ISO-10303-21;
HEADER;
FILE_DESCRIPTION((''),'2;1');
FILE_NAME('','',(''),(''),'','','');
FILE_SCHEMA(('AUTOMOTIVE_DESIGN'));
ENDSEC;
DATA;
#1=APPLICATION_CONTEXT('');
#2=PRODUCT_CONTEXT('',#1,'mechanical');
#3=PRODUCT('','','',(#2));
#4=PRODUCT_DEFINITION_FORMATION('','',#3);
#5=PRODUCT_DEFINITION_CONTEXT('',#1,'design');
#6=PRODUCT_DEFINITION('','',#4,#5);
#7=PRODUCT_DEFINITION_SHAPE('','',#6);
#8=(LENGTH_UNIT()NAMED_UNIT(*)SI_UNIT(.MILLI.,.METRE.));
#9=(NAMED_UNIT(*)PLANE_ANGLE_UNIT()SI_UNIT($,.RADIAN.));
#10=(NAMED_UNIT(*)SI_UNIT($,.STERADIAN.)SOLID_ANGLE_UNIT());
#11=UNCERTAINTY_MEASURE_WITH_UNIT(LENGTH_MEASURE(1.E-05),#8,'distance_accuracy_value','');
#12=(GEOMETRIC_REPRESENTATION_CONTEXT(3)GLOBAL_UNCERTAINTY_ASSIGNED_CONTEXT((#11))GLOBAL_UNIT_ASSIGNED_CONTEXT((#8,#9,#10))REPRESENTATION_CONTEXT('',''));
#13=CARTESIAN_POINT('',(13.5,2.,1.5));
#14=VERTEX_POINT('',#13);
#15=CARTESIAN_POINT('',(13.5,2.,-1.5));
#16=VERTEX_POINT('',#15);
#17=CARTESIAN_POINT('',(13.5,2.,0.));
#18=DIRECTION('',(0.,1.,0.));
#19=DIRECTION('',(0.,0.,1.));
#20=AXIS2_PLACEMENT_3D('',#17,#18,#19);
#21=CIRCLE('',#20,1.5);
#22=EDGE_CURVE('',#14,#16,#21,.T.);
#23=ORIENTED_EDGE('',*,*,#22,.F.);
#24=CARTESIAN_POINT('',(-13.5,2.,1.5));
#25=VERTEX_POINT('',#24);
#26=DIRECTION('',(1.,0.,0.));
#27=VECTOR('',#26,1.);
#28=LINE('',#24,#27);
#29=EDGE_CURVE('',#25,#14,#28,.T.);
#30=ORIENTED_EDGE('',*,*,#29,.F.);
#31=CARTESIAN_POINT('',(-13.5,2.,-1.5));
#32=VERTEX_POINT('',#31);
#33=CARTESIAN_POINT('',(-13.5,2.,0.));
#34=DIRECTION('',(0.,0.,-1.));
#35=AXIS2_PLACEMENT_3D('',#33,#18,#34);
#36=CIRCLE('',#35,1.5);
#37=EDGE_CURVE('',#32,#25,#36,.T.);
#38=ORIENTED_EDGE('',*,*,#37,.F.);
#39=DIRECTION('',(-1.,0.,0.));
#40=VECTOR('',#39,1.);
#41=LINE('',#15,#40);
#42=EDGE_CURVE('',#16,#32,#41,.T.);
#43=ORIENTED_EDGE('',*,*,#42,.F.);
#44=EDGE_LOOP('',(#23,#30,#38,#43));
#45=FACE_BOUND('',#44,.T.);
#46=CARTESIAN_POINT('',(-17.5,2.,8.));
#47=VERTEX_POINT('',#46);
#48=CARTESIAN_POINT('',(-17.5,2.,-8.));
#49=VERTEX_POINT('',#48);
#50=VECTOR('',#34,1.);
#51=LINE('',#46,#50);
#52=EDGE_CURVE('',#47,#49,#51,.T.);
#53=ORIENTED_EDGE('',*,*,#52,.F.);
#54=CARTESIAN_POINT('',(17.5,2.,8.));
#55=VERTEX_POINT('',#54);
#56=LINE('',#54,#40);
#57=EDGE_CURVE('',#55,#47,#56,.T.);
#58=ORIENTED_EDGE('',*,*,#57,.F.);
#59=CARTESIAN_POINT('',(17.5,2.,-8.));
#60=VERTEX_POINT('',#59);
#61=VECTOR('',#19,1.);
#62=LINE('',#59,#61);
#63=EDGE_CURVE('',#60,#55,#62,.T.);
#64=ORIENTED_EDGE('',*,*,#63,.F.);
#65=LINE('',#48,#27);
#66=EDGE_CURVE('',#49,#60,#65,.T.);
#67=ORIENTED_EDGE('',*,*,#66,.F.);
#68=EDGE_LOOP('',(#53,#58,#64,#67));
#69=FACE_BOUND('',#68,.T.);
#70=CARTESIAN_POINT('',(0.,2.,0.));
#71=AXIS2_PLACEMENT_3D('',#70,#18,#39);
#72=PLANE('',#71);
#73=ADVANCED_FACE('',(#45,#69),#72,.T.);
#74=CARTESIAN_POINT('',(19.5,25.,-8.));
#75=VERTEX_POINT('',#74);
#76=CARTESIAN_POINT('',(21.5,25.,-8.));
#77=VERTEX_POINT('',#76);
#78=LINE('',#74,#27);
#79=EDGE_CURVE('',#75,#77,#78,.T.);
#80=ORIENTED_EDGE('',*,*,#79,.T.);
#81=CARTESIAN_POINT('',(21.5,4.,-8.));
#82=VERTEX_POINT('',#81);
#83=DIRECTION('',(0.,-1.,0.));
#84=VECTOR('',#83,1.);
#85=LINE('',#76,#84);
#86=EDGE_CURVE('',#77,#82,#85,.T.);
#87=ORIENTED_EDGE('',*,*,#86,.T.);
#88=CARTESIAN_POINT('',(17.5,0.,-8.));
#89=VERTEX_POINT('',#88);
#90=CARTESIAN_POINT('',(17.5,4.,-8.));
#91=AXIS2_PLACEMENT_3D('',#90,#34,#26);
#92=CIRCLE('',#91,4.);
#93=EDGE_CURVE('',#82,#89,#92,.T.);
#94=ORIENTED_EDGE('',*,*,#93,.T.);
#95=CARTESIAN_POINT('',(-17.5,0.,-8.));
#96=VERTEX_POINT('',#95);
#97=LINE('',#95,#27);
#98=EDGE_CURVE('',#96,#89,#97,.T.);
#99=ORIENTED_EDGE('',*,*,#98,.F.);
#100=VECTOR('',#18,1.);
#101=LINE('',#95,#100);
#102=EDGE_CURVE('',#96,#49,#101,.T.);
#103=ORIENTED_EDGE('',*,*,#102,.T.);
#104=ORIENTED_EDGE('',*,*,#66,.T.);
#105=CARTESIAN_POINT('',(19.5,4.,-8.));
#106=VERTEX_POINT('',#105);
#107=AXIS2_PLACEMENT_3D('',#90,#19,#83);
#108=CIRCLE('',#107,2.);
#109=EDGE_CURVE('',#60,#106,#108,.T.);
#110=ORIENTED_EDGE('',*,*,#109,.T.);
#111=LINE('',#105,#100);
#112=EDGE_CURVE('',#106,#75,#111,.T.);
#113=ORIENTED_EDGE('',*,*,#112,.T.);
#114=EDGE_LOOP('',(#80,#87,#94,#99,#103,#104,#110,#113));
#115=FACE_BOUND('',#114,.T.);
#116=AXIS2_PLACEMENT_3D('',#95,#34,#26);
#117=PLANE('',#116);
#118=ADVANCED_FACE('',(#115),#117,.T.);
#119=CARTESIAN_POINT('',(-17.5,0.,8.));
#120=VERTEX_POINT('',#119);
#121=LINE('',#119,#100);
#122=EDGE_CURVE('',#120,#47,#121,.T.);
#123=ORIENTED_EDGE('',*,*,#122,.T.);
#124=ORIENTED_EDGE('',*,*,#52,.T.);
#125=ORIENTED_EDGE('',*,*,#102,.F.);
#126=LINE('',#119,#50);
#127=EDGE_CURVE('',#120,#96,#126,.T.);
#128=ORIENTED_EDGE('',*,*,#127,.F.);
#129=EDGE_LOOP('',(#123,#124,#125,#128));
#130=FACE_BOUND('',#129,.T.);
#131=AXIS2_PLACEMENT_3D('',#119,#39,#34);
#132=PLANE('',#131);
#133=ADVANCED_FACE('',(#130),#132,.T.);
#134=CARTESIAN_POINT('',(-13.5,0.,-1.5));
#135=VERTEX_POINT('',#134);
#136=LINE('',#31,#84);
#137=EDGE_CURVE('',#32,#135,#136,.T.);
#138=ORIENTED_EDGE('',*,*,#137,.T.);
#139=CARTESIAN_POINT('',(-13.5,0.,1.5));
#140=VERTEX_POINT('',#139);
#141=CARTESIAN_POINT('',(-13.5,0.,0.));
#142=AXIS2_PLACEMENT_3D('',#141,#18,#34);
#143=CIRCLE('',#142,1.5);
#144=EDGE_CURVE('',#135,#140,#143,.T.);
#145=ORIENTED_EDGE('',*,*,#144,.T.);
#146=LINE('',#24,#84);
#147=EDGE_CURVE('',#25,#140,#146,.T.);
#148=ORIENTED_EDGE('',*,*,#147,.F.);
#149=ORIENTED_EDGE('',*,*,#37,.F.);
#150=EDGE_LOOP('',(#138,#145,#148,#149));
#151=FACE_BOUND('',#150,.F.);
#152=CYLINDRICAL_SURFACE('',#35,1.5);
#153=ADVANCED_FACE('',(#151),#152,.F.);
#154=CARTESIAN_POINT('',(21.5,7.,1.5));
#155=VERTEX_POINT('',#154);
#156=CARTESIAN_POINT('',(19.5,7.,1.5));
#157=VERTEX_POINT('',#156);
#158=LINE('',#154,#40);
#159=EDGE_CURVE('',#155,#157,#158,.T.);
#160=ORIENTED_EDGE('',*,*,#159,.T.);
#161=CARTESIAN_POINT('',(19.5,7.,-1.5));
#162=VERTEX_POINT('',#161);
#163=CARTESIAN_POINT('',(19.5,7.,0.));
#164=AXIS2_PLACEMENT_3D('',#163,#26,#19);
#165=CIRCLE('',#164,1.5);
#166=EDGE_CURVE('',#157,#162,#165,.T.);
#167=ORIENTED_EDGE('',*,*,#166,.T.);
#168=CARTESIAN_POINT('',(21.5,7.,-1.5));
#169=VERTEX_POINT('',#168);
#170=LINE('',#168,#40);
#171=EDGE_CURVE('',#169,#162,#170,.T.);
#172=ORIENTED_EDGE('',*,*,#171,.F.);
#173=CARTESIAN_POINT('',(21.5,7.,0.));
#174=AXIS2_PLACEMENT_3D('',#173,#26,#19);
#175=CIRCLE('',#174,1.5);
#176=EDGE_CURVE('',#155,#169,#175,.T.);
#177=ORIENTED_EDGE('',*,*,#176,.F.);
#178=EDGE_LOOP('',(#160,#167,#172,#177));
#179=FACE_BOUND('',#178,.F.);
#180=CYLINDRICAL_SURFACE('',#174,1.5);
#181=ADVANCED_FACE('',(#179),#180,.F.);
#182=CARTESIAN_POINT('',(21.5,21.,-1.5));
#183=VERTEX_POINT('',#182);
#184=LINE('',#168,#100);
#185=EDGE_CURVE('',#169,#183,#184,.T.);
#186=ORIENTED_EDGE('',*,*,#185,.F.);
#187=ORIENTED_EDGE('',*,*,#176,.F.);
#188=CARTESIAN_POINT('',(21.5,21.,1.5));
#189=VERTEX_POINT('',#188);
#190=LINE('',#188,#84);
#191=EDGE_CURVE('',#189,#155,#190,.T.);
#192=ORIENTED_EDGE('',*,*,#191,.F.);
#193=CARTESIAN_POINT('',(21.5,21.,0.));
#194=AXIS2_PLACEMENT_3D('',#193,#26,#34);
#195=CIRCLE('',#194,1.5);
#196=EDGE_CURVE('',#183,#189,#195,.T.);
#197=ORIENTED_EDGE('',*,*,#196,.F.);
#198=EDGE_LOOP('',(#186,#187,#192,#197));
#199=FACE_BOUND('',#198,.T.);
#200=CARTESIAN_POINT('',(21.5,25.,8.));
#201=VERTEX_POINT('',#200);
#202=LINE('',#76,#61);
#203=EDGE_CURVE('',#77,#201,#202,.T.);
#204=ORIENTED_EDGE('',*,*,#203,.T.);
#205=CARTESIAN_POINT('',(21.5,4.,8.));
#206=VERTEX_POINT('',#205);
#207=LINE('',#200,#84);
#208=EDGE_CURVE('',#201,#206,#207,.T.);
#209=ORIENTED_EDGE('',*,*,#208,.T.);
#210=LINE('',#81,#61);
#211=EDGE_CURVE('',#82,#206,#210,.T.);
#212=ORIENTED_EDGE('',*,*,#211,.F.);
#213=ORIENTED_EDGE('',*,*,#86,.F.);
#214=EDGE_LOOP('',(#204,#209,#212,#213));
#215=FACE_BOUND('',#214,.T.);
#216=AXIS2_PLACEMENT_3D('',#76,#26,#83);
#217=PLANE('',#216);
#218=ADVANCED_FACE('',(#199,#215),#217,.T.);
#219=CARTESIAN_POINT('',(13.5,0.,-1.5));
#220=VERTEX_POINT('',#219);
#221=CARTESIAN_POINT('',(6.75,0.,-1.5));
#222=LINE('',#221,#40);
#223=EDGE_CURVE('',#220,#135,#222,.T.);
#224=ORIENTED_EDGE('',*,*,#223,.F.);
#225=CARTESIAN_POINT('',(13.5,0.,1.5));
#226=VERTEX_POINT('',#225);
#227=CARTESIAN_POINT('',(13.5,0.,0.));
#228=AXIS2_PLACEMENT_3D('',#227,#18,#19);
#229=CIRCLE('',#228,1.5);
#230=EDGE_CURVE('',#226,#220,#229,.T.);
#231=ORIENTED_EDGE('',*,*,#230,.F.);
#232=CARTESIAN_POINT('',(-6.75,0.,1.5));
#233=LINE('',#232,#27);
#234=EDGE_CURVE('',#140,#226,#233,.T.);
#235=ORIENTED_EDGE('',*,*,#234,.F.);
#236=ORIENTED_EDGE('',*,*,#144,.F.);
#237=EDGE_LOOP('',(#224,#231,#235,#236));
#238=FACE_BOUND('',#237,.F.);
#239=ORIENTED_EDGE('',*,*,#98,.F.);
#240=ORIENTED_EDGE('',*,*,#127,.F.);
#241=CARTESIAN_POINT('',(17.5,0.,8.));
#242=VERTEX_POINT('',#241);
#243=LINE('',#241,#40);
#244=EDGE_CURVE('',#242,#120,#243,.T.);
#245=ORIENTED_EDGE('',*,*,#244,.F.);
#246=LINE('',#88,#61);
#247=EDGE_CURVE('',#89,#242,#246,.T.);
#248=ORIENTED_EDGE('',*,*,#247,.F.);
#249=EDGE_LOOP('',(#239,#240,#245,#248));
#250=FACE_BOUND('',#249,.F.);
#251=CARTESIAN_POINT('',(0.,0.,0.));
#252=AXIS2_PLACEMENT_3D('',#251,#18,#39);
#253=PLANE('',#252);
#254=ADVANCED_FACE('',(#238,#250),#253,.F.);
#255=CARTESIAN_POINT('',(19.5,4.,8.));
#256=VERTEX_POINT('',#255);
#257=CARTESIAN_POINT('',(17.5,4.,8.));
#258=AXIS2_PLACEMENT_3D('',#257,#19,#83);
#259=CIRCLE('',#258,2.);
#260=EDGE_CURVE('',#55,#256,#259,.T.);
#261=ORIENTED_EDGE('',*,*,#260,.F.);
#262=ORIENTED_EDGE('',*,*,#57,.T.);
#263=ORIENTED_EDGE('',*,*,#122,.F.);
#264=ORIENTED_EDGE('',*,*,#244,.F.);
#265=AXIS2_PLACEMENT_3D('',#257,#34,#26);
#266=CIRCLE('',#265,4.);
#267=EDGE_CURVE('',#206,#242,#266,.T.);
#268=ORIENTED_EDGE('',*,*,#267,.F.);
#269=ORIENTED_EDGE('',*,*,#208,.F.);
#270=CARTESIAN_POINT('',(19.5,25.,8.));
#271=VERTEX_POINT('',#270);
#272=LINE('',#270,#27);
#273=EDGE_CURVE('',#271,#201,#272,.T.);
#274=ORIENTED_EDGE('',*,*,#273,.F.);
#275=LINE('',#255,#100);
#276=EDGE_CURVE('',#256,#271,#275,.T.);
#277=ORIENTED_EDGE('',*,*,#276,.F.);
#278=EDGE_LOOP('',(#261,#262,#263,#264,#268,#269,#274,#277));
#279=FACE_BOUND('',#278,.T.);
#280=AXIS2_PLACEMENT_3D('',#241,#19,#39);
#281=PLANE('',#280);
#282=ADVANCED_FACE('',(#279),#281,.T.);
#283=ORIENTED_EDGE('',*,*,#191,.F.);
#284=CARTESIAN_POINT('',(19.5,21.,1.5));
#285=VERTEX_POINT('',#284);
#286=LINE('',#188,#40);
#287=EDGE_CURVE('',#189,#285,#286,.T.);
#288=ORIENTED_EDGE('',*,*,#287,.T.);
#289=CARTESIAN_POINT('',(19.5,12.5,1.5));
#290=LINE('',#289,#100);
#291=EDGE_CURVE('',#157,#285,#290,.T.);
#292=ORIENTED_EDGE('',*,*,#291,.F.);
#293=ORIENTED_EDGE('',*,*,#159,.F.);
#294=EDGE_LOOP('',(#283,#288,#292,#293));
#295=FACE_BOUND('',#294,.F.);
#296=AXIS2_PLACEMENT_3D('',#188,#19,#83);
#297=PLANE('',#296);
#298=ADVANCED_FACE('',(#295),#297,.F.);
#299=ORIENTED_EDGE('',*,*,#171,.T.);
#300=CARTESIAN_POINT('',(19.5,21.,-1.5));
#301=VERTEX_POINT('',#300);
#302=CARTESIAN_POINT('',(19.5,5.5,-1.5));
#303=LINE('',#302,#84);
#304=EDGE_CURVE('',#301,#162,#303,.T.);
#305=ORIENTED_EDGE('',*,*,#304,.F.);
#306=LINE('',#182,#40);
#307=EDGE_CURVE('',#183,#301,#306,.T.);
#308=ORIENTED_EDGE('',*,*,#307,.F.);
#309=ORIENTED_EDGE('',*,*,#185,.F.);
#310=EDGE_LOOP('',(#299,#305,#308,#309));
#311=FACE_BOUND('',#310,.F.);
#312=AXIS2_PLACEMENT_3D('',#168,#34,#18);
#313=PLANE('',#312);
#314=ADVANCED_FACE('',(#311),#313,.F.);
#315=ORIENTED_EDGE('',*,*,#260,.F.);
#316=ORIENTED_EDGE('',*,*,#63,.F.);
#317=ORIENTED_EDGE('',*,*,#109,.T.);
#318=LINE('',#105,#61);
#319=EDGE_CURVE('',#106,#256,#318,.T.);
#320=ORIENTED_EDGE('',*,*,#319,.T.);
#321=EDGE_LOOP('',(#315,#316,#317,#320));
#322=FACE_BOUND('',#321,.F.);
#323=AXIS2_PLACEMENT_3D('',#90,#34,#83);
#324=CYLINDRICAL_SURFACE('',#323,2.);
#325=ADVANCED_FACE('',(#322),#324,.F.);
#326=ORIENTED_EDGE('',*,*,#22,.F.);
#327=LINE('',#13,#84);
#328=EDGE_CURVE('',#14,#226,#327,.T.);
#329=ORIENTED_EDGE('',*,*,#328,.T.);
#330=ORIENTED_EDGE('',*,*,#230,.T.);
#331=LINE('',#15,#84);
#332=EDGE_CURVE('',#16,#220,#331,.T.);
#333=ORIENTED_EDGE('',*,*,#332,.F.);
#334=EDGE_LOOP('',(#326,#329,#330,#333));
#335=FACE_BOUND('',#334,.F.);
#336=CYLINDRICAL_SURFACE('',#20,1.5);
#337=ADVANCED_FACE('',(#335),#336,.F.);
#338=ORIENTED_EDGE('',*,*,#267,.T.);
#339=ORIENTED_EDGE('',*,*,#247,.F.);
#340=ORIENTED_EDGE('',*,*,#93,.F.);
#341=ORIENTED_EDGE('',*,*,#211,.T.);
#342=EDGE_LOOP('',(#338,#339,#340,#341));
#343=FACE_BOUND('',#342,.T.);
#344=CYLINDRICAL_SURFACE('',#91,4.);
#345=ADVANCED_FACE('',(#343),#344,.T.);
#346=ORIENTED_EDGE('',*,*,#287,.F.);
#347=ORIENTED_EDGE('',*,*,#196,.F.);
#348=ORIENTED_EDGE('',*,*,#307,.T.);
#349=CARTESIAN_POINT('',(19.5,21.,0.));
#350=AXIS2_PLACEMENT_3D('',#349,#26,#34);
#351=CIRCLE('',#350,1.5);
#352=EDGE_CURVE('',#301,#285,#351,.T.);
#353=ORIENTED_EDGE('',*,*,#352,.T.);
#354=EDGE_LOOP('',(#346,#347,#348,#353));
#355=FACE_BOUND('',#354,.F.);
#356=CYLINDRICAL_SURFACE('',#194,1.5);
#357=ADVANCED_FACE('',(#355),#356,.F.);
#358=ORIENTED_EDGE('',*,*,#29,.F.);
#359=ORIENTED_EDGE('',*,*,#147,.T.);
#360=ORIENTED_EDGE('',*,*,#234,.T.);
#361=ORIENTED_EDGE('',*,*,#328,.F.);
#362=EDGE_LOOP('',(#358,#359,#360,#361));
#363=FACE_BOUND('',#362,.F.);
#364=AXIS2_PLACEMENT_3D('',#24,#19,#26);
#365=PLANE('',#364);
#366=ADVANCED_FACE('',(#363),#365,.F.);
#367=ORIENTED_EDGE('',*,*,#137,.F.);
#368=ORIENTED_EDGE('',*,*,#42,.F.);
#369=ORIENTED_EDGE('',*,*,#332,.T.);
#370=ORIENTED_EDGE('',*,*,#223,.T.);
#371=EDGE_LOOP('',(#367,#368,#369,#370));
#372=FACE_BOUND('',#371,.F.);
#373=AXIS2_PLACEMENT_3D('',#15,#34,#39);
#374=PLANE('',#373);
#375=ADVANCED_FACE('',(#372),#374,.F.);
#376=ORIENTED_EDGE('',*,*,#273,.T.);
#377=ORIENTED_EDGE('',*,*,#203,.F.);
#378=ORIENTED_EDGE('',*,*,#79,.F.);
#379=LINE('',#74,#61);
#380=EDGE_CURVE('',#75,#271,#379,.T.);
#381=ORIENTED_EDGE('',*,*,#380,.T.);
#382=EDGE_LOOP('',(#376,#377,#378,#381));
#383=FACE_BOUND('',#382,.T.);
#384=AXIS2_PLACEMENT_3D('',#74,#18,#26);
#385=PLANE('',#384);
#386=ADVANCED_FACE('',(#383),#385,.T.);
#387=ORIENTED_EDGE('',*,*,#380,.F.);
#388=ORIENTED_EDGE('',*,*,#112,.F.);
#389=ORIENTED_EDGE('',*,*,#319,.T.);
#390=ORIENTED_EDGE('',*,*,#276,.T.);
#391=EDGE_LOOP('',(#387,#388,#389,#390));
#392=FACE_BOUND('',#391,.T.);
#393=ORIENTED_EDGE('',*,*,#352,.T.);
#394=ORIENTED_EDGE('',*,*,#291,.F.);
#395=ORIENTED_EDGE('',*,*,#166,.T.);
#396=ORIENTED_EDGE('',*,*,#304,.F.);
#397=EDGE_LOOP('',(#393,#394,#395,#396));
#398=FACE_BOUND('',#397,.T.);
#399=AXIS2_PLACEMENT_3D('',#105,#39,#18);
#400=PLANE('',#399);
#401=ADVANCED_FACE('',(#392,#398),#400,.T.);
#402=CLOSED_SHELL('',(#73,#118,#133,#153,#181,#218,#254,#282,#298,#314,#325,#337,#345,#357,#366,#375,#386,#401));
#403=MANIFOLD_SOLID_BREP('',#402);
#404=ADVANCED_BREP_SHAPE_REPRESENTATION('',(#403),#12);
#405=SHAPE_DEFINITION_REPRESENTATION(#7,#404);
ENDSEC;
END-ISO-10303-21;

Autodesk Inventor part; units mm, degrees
ref_plane "YZ Plane" through (0, 0, 0) normal (1, 0, 0) x (0, 1, 0)
ref_plane "XZ Plane" through (0, 0, 0) normal (0, 1, 0) x (-1, 0, 0)
ref_plane "XY Plane" through (0, 0, 0) normal (0, 0, 1) x (1, 0, 0)
sketch "スケッチ1" plane through (0, 0, 0) normal (0, 1, 0) x (-1, 0, 0)
  line L0 (-17.5, 8) -> (17.5, 8)
  line L1 (17.5, 8) -> (17.5, -8)
  line L2 (17.5, -8) -> (-17.5, -8)
  line L3 (-17.5, -8) -> (-17.5, 8)
  line L4 (-17.5, 8) -> (17.5, -8) construction
  line L5 (17.5, 8) -> (-17.5, -8) construction
  point P0 (0, 0)
  dimension "d0" = 35
  dimension "d1" = 16
extrude "プレート1" add sketch "スケッチ1" along normal blind 2
sketch "スケッチ2" plane through (19.5, 4, -8) normal (1, 0, 0) x (0, 1, 0)
  line L0 (0, 16) -> (0, 0)
  line L1 (0, 0) -> (21, 0)
  line L2 (21, 0) -> (21, 16)
  line L3 (21, 16) -> (0, 16)
edge flange "フランジ1" height 25 angle 90 thickness 2 bend radius 2 thickness toward (1, 0, 0) relief tear relief width 2 relief depth 1 edges at (17.5, 2, 0) wall of the first edge with corners at (19.5, 4, 8) (19.5, 4, -8) (19.5, 25, -8) (19.5, 25, 8)
bend "曲げ1"
corner "コーナー1"
sketch "スケッチ3" plane through (21.5, 25, 8) normal (1, 0, 0) x (0, 0, -1)
  line L0 (6.5, -4) -> (6.5, -18)
  arc A0 (6.5, -18) -> (9.5, -18) centre (8, -18) ccw
  line L1 (9.5, -18) -> (9.5, -4)
  arc A1 (9.5, -4) -> (6.5, -4) centre (8, -4) ccw
  line L2 (16, 0) -> (16, -21) projected
  line L3 (0, 0) -> (16, 0) projected
  point P0 (8, -25)
  point P1 (8, 0)
  dimension "d19" = 1.5
extrude "押し出し1" cut sketch "スケッチ3" against normal blind 10
sketch "スケッチ4" plane through (0, 2, 0) normal (0, 1, 0) x (1, 0, 0)
  line L0 (-13.5, -1.5) -> (13.5, -1.5)
  arc A0 (13.5, -1.5) -> (13.5, 1.5) centre (13.5, 0) ccw
  line L1 (13.5, 1.5) -> (-13.5, 1.5)
  arc A1 (-13.5, 1.5) -> (-13.5, -1.5) centre (-13.5, 0) ccw
  line L2 (-17.5, -8) -> (-17.5, 8) projected
  line L3 (17.5, 8) -> (17.5, -8) projected
  point P0 (0, 0)
  dimension "d23" = 4
  dimension "d24" = 4
  dimension "d25" = 1.5
extrude "押し出し2" cut sketch "スケッチ4" against normal blind 10
equation "\"d2\" = Thickness"
equation "\"d3\" = BendReliefWidth"
equation "\"d4\" = BendReliefDepth"
equation "\"d5\" = MinimumRemnant"
equation "\"d6\" = TransitionRadius"
equation "\"d9\" = BendRadius"
equation "\"d10\" = CornerReliefSize"
equation "\"d11\" = GapSize"
equation "\"d12\" = JacobiRadiusSize"
equation "\"BendRadius\" = Thickness"
equation "\"BendReliefWidth\" = Thickness"
equation "\"BendReliefDepth\" = 0.5 * Thickness"
equation "\"CornerReliefSize\" = 4 * Thickness"
equation "\"MinimumRemnant\" = 2 * Thickness"
equation "\"TransitionRadius\" = BendRadius"
equation "\"JacobiRadiusSize\" = BendRadius"
equation "\"GapSize\" = Thickness"
equation "\"Thickness\" = 2"
properties part number "keyL_extended" material "アルミニウム 6061"
